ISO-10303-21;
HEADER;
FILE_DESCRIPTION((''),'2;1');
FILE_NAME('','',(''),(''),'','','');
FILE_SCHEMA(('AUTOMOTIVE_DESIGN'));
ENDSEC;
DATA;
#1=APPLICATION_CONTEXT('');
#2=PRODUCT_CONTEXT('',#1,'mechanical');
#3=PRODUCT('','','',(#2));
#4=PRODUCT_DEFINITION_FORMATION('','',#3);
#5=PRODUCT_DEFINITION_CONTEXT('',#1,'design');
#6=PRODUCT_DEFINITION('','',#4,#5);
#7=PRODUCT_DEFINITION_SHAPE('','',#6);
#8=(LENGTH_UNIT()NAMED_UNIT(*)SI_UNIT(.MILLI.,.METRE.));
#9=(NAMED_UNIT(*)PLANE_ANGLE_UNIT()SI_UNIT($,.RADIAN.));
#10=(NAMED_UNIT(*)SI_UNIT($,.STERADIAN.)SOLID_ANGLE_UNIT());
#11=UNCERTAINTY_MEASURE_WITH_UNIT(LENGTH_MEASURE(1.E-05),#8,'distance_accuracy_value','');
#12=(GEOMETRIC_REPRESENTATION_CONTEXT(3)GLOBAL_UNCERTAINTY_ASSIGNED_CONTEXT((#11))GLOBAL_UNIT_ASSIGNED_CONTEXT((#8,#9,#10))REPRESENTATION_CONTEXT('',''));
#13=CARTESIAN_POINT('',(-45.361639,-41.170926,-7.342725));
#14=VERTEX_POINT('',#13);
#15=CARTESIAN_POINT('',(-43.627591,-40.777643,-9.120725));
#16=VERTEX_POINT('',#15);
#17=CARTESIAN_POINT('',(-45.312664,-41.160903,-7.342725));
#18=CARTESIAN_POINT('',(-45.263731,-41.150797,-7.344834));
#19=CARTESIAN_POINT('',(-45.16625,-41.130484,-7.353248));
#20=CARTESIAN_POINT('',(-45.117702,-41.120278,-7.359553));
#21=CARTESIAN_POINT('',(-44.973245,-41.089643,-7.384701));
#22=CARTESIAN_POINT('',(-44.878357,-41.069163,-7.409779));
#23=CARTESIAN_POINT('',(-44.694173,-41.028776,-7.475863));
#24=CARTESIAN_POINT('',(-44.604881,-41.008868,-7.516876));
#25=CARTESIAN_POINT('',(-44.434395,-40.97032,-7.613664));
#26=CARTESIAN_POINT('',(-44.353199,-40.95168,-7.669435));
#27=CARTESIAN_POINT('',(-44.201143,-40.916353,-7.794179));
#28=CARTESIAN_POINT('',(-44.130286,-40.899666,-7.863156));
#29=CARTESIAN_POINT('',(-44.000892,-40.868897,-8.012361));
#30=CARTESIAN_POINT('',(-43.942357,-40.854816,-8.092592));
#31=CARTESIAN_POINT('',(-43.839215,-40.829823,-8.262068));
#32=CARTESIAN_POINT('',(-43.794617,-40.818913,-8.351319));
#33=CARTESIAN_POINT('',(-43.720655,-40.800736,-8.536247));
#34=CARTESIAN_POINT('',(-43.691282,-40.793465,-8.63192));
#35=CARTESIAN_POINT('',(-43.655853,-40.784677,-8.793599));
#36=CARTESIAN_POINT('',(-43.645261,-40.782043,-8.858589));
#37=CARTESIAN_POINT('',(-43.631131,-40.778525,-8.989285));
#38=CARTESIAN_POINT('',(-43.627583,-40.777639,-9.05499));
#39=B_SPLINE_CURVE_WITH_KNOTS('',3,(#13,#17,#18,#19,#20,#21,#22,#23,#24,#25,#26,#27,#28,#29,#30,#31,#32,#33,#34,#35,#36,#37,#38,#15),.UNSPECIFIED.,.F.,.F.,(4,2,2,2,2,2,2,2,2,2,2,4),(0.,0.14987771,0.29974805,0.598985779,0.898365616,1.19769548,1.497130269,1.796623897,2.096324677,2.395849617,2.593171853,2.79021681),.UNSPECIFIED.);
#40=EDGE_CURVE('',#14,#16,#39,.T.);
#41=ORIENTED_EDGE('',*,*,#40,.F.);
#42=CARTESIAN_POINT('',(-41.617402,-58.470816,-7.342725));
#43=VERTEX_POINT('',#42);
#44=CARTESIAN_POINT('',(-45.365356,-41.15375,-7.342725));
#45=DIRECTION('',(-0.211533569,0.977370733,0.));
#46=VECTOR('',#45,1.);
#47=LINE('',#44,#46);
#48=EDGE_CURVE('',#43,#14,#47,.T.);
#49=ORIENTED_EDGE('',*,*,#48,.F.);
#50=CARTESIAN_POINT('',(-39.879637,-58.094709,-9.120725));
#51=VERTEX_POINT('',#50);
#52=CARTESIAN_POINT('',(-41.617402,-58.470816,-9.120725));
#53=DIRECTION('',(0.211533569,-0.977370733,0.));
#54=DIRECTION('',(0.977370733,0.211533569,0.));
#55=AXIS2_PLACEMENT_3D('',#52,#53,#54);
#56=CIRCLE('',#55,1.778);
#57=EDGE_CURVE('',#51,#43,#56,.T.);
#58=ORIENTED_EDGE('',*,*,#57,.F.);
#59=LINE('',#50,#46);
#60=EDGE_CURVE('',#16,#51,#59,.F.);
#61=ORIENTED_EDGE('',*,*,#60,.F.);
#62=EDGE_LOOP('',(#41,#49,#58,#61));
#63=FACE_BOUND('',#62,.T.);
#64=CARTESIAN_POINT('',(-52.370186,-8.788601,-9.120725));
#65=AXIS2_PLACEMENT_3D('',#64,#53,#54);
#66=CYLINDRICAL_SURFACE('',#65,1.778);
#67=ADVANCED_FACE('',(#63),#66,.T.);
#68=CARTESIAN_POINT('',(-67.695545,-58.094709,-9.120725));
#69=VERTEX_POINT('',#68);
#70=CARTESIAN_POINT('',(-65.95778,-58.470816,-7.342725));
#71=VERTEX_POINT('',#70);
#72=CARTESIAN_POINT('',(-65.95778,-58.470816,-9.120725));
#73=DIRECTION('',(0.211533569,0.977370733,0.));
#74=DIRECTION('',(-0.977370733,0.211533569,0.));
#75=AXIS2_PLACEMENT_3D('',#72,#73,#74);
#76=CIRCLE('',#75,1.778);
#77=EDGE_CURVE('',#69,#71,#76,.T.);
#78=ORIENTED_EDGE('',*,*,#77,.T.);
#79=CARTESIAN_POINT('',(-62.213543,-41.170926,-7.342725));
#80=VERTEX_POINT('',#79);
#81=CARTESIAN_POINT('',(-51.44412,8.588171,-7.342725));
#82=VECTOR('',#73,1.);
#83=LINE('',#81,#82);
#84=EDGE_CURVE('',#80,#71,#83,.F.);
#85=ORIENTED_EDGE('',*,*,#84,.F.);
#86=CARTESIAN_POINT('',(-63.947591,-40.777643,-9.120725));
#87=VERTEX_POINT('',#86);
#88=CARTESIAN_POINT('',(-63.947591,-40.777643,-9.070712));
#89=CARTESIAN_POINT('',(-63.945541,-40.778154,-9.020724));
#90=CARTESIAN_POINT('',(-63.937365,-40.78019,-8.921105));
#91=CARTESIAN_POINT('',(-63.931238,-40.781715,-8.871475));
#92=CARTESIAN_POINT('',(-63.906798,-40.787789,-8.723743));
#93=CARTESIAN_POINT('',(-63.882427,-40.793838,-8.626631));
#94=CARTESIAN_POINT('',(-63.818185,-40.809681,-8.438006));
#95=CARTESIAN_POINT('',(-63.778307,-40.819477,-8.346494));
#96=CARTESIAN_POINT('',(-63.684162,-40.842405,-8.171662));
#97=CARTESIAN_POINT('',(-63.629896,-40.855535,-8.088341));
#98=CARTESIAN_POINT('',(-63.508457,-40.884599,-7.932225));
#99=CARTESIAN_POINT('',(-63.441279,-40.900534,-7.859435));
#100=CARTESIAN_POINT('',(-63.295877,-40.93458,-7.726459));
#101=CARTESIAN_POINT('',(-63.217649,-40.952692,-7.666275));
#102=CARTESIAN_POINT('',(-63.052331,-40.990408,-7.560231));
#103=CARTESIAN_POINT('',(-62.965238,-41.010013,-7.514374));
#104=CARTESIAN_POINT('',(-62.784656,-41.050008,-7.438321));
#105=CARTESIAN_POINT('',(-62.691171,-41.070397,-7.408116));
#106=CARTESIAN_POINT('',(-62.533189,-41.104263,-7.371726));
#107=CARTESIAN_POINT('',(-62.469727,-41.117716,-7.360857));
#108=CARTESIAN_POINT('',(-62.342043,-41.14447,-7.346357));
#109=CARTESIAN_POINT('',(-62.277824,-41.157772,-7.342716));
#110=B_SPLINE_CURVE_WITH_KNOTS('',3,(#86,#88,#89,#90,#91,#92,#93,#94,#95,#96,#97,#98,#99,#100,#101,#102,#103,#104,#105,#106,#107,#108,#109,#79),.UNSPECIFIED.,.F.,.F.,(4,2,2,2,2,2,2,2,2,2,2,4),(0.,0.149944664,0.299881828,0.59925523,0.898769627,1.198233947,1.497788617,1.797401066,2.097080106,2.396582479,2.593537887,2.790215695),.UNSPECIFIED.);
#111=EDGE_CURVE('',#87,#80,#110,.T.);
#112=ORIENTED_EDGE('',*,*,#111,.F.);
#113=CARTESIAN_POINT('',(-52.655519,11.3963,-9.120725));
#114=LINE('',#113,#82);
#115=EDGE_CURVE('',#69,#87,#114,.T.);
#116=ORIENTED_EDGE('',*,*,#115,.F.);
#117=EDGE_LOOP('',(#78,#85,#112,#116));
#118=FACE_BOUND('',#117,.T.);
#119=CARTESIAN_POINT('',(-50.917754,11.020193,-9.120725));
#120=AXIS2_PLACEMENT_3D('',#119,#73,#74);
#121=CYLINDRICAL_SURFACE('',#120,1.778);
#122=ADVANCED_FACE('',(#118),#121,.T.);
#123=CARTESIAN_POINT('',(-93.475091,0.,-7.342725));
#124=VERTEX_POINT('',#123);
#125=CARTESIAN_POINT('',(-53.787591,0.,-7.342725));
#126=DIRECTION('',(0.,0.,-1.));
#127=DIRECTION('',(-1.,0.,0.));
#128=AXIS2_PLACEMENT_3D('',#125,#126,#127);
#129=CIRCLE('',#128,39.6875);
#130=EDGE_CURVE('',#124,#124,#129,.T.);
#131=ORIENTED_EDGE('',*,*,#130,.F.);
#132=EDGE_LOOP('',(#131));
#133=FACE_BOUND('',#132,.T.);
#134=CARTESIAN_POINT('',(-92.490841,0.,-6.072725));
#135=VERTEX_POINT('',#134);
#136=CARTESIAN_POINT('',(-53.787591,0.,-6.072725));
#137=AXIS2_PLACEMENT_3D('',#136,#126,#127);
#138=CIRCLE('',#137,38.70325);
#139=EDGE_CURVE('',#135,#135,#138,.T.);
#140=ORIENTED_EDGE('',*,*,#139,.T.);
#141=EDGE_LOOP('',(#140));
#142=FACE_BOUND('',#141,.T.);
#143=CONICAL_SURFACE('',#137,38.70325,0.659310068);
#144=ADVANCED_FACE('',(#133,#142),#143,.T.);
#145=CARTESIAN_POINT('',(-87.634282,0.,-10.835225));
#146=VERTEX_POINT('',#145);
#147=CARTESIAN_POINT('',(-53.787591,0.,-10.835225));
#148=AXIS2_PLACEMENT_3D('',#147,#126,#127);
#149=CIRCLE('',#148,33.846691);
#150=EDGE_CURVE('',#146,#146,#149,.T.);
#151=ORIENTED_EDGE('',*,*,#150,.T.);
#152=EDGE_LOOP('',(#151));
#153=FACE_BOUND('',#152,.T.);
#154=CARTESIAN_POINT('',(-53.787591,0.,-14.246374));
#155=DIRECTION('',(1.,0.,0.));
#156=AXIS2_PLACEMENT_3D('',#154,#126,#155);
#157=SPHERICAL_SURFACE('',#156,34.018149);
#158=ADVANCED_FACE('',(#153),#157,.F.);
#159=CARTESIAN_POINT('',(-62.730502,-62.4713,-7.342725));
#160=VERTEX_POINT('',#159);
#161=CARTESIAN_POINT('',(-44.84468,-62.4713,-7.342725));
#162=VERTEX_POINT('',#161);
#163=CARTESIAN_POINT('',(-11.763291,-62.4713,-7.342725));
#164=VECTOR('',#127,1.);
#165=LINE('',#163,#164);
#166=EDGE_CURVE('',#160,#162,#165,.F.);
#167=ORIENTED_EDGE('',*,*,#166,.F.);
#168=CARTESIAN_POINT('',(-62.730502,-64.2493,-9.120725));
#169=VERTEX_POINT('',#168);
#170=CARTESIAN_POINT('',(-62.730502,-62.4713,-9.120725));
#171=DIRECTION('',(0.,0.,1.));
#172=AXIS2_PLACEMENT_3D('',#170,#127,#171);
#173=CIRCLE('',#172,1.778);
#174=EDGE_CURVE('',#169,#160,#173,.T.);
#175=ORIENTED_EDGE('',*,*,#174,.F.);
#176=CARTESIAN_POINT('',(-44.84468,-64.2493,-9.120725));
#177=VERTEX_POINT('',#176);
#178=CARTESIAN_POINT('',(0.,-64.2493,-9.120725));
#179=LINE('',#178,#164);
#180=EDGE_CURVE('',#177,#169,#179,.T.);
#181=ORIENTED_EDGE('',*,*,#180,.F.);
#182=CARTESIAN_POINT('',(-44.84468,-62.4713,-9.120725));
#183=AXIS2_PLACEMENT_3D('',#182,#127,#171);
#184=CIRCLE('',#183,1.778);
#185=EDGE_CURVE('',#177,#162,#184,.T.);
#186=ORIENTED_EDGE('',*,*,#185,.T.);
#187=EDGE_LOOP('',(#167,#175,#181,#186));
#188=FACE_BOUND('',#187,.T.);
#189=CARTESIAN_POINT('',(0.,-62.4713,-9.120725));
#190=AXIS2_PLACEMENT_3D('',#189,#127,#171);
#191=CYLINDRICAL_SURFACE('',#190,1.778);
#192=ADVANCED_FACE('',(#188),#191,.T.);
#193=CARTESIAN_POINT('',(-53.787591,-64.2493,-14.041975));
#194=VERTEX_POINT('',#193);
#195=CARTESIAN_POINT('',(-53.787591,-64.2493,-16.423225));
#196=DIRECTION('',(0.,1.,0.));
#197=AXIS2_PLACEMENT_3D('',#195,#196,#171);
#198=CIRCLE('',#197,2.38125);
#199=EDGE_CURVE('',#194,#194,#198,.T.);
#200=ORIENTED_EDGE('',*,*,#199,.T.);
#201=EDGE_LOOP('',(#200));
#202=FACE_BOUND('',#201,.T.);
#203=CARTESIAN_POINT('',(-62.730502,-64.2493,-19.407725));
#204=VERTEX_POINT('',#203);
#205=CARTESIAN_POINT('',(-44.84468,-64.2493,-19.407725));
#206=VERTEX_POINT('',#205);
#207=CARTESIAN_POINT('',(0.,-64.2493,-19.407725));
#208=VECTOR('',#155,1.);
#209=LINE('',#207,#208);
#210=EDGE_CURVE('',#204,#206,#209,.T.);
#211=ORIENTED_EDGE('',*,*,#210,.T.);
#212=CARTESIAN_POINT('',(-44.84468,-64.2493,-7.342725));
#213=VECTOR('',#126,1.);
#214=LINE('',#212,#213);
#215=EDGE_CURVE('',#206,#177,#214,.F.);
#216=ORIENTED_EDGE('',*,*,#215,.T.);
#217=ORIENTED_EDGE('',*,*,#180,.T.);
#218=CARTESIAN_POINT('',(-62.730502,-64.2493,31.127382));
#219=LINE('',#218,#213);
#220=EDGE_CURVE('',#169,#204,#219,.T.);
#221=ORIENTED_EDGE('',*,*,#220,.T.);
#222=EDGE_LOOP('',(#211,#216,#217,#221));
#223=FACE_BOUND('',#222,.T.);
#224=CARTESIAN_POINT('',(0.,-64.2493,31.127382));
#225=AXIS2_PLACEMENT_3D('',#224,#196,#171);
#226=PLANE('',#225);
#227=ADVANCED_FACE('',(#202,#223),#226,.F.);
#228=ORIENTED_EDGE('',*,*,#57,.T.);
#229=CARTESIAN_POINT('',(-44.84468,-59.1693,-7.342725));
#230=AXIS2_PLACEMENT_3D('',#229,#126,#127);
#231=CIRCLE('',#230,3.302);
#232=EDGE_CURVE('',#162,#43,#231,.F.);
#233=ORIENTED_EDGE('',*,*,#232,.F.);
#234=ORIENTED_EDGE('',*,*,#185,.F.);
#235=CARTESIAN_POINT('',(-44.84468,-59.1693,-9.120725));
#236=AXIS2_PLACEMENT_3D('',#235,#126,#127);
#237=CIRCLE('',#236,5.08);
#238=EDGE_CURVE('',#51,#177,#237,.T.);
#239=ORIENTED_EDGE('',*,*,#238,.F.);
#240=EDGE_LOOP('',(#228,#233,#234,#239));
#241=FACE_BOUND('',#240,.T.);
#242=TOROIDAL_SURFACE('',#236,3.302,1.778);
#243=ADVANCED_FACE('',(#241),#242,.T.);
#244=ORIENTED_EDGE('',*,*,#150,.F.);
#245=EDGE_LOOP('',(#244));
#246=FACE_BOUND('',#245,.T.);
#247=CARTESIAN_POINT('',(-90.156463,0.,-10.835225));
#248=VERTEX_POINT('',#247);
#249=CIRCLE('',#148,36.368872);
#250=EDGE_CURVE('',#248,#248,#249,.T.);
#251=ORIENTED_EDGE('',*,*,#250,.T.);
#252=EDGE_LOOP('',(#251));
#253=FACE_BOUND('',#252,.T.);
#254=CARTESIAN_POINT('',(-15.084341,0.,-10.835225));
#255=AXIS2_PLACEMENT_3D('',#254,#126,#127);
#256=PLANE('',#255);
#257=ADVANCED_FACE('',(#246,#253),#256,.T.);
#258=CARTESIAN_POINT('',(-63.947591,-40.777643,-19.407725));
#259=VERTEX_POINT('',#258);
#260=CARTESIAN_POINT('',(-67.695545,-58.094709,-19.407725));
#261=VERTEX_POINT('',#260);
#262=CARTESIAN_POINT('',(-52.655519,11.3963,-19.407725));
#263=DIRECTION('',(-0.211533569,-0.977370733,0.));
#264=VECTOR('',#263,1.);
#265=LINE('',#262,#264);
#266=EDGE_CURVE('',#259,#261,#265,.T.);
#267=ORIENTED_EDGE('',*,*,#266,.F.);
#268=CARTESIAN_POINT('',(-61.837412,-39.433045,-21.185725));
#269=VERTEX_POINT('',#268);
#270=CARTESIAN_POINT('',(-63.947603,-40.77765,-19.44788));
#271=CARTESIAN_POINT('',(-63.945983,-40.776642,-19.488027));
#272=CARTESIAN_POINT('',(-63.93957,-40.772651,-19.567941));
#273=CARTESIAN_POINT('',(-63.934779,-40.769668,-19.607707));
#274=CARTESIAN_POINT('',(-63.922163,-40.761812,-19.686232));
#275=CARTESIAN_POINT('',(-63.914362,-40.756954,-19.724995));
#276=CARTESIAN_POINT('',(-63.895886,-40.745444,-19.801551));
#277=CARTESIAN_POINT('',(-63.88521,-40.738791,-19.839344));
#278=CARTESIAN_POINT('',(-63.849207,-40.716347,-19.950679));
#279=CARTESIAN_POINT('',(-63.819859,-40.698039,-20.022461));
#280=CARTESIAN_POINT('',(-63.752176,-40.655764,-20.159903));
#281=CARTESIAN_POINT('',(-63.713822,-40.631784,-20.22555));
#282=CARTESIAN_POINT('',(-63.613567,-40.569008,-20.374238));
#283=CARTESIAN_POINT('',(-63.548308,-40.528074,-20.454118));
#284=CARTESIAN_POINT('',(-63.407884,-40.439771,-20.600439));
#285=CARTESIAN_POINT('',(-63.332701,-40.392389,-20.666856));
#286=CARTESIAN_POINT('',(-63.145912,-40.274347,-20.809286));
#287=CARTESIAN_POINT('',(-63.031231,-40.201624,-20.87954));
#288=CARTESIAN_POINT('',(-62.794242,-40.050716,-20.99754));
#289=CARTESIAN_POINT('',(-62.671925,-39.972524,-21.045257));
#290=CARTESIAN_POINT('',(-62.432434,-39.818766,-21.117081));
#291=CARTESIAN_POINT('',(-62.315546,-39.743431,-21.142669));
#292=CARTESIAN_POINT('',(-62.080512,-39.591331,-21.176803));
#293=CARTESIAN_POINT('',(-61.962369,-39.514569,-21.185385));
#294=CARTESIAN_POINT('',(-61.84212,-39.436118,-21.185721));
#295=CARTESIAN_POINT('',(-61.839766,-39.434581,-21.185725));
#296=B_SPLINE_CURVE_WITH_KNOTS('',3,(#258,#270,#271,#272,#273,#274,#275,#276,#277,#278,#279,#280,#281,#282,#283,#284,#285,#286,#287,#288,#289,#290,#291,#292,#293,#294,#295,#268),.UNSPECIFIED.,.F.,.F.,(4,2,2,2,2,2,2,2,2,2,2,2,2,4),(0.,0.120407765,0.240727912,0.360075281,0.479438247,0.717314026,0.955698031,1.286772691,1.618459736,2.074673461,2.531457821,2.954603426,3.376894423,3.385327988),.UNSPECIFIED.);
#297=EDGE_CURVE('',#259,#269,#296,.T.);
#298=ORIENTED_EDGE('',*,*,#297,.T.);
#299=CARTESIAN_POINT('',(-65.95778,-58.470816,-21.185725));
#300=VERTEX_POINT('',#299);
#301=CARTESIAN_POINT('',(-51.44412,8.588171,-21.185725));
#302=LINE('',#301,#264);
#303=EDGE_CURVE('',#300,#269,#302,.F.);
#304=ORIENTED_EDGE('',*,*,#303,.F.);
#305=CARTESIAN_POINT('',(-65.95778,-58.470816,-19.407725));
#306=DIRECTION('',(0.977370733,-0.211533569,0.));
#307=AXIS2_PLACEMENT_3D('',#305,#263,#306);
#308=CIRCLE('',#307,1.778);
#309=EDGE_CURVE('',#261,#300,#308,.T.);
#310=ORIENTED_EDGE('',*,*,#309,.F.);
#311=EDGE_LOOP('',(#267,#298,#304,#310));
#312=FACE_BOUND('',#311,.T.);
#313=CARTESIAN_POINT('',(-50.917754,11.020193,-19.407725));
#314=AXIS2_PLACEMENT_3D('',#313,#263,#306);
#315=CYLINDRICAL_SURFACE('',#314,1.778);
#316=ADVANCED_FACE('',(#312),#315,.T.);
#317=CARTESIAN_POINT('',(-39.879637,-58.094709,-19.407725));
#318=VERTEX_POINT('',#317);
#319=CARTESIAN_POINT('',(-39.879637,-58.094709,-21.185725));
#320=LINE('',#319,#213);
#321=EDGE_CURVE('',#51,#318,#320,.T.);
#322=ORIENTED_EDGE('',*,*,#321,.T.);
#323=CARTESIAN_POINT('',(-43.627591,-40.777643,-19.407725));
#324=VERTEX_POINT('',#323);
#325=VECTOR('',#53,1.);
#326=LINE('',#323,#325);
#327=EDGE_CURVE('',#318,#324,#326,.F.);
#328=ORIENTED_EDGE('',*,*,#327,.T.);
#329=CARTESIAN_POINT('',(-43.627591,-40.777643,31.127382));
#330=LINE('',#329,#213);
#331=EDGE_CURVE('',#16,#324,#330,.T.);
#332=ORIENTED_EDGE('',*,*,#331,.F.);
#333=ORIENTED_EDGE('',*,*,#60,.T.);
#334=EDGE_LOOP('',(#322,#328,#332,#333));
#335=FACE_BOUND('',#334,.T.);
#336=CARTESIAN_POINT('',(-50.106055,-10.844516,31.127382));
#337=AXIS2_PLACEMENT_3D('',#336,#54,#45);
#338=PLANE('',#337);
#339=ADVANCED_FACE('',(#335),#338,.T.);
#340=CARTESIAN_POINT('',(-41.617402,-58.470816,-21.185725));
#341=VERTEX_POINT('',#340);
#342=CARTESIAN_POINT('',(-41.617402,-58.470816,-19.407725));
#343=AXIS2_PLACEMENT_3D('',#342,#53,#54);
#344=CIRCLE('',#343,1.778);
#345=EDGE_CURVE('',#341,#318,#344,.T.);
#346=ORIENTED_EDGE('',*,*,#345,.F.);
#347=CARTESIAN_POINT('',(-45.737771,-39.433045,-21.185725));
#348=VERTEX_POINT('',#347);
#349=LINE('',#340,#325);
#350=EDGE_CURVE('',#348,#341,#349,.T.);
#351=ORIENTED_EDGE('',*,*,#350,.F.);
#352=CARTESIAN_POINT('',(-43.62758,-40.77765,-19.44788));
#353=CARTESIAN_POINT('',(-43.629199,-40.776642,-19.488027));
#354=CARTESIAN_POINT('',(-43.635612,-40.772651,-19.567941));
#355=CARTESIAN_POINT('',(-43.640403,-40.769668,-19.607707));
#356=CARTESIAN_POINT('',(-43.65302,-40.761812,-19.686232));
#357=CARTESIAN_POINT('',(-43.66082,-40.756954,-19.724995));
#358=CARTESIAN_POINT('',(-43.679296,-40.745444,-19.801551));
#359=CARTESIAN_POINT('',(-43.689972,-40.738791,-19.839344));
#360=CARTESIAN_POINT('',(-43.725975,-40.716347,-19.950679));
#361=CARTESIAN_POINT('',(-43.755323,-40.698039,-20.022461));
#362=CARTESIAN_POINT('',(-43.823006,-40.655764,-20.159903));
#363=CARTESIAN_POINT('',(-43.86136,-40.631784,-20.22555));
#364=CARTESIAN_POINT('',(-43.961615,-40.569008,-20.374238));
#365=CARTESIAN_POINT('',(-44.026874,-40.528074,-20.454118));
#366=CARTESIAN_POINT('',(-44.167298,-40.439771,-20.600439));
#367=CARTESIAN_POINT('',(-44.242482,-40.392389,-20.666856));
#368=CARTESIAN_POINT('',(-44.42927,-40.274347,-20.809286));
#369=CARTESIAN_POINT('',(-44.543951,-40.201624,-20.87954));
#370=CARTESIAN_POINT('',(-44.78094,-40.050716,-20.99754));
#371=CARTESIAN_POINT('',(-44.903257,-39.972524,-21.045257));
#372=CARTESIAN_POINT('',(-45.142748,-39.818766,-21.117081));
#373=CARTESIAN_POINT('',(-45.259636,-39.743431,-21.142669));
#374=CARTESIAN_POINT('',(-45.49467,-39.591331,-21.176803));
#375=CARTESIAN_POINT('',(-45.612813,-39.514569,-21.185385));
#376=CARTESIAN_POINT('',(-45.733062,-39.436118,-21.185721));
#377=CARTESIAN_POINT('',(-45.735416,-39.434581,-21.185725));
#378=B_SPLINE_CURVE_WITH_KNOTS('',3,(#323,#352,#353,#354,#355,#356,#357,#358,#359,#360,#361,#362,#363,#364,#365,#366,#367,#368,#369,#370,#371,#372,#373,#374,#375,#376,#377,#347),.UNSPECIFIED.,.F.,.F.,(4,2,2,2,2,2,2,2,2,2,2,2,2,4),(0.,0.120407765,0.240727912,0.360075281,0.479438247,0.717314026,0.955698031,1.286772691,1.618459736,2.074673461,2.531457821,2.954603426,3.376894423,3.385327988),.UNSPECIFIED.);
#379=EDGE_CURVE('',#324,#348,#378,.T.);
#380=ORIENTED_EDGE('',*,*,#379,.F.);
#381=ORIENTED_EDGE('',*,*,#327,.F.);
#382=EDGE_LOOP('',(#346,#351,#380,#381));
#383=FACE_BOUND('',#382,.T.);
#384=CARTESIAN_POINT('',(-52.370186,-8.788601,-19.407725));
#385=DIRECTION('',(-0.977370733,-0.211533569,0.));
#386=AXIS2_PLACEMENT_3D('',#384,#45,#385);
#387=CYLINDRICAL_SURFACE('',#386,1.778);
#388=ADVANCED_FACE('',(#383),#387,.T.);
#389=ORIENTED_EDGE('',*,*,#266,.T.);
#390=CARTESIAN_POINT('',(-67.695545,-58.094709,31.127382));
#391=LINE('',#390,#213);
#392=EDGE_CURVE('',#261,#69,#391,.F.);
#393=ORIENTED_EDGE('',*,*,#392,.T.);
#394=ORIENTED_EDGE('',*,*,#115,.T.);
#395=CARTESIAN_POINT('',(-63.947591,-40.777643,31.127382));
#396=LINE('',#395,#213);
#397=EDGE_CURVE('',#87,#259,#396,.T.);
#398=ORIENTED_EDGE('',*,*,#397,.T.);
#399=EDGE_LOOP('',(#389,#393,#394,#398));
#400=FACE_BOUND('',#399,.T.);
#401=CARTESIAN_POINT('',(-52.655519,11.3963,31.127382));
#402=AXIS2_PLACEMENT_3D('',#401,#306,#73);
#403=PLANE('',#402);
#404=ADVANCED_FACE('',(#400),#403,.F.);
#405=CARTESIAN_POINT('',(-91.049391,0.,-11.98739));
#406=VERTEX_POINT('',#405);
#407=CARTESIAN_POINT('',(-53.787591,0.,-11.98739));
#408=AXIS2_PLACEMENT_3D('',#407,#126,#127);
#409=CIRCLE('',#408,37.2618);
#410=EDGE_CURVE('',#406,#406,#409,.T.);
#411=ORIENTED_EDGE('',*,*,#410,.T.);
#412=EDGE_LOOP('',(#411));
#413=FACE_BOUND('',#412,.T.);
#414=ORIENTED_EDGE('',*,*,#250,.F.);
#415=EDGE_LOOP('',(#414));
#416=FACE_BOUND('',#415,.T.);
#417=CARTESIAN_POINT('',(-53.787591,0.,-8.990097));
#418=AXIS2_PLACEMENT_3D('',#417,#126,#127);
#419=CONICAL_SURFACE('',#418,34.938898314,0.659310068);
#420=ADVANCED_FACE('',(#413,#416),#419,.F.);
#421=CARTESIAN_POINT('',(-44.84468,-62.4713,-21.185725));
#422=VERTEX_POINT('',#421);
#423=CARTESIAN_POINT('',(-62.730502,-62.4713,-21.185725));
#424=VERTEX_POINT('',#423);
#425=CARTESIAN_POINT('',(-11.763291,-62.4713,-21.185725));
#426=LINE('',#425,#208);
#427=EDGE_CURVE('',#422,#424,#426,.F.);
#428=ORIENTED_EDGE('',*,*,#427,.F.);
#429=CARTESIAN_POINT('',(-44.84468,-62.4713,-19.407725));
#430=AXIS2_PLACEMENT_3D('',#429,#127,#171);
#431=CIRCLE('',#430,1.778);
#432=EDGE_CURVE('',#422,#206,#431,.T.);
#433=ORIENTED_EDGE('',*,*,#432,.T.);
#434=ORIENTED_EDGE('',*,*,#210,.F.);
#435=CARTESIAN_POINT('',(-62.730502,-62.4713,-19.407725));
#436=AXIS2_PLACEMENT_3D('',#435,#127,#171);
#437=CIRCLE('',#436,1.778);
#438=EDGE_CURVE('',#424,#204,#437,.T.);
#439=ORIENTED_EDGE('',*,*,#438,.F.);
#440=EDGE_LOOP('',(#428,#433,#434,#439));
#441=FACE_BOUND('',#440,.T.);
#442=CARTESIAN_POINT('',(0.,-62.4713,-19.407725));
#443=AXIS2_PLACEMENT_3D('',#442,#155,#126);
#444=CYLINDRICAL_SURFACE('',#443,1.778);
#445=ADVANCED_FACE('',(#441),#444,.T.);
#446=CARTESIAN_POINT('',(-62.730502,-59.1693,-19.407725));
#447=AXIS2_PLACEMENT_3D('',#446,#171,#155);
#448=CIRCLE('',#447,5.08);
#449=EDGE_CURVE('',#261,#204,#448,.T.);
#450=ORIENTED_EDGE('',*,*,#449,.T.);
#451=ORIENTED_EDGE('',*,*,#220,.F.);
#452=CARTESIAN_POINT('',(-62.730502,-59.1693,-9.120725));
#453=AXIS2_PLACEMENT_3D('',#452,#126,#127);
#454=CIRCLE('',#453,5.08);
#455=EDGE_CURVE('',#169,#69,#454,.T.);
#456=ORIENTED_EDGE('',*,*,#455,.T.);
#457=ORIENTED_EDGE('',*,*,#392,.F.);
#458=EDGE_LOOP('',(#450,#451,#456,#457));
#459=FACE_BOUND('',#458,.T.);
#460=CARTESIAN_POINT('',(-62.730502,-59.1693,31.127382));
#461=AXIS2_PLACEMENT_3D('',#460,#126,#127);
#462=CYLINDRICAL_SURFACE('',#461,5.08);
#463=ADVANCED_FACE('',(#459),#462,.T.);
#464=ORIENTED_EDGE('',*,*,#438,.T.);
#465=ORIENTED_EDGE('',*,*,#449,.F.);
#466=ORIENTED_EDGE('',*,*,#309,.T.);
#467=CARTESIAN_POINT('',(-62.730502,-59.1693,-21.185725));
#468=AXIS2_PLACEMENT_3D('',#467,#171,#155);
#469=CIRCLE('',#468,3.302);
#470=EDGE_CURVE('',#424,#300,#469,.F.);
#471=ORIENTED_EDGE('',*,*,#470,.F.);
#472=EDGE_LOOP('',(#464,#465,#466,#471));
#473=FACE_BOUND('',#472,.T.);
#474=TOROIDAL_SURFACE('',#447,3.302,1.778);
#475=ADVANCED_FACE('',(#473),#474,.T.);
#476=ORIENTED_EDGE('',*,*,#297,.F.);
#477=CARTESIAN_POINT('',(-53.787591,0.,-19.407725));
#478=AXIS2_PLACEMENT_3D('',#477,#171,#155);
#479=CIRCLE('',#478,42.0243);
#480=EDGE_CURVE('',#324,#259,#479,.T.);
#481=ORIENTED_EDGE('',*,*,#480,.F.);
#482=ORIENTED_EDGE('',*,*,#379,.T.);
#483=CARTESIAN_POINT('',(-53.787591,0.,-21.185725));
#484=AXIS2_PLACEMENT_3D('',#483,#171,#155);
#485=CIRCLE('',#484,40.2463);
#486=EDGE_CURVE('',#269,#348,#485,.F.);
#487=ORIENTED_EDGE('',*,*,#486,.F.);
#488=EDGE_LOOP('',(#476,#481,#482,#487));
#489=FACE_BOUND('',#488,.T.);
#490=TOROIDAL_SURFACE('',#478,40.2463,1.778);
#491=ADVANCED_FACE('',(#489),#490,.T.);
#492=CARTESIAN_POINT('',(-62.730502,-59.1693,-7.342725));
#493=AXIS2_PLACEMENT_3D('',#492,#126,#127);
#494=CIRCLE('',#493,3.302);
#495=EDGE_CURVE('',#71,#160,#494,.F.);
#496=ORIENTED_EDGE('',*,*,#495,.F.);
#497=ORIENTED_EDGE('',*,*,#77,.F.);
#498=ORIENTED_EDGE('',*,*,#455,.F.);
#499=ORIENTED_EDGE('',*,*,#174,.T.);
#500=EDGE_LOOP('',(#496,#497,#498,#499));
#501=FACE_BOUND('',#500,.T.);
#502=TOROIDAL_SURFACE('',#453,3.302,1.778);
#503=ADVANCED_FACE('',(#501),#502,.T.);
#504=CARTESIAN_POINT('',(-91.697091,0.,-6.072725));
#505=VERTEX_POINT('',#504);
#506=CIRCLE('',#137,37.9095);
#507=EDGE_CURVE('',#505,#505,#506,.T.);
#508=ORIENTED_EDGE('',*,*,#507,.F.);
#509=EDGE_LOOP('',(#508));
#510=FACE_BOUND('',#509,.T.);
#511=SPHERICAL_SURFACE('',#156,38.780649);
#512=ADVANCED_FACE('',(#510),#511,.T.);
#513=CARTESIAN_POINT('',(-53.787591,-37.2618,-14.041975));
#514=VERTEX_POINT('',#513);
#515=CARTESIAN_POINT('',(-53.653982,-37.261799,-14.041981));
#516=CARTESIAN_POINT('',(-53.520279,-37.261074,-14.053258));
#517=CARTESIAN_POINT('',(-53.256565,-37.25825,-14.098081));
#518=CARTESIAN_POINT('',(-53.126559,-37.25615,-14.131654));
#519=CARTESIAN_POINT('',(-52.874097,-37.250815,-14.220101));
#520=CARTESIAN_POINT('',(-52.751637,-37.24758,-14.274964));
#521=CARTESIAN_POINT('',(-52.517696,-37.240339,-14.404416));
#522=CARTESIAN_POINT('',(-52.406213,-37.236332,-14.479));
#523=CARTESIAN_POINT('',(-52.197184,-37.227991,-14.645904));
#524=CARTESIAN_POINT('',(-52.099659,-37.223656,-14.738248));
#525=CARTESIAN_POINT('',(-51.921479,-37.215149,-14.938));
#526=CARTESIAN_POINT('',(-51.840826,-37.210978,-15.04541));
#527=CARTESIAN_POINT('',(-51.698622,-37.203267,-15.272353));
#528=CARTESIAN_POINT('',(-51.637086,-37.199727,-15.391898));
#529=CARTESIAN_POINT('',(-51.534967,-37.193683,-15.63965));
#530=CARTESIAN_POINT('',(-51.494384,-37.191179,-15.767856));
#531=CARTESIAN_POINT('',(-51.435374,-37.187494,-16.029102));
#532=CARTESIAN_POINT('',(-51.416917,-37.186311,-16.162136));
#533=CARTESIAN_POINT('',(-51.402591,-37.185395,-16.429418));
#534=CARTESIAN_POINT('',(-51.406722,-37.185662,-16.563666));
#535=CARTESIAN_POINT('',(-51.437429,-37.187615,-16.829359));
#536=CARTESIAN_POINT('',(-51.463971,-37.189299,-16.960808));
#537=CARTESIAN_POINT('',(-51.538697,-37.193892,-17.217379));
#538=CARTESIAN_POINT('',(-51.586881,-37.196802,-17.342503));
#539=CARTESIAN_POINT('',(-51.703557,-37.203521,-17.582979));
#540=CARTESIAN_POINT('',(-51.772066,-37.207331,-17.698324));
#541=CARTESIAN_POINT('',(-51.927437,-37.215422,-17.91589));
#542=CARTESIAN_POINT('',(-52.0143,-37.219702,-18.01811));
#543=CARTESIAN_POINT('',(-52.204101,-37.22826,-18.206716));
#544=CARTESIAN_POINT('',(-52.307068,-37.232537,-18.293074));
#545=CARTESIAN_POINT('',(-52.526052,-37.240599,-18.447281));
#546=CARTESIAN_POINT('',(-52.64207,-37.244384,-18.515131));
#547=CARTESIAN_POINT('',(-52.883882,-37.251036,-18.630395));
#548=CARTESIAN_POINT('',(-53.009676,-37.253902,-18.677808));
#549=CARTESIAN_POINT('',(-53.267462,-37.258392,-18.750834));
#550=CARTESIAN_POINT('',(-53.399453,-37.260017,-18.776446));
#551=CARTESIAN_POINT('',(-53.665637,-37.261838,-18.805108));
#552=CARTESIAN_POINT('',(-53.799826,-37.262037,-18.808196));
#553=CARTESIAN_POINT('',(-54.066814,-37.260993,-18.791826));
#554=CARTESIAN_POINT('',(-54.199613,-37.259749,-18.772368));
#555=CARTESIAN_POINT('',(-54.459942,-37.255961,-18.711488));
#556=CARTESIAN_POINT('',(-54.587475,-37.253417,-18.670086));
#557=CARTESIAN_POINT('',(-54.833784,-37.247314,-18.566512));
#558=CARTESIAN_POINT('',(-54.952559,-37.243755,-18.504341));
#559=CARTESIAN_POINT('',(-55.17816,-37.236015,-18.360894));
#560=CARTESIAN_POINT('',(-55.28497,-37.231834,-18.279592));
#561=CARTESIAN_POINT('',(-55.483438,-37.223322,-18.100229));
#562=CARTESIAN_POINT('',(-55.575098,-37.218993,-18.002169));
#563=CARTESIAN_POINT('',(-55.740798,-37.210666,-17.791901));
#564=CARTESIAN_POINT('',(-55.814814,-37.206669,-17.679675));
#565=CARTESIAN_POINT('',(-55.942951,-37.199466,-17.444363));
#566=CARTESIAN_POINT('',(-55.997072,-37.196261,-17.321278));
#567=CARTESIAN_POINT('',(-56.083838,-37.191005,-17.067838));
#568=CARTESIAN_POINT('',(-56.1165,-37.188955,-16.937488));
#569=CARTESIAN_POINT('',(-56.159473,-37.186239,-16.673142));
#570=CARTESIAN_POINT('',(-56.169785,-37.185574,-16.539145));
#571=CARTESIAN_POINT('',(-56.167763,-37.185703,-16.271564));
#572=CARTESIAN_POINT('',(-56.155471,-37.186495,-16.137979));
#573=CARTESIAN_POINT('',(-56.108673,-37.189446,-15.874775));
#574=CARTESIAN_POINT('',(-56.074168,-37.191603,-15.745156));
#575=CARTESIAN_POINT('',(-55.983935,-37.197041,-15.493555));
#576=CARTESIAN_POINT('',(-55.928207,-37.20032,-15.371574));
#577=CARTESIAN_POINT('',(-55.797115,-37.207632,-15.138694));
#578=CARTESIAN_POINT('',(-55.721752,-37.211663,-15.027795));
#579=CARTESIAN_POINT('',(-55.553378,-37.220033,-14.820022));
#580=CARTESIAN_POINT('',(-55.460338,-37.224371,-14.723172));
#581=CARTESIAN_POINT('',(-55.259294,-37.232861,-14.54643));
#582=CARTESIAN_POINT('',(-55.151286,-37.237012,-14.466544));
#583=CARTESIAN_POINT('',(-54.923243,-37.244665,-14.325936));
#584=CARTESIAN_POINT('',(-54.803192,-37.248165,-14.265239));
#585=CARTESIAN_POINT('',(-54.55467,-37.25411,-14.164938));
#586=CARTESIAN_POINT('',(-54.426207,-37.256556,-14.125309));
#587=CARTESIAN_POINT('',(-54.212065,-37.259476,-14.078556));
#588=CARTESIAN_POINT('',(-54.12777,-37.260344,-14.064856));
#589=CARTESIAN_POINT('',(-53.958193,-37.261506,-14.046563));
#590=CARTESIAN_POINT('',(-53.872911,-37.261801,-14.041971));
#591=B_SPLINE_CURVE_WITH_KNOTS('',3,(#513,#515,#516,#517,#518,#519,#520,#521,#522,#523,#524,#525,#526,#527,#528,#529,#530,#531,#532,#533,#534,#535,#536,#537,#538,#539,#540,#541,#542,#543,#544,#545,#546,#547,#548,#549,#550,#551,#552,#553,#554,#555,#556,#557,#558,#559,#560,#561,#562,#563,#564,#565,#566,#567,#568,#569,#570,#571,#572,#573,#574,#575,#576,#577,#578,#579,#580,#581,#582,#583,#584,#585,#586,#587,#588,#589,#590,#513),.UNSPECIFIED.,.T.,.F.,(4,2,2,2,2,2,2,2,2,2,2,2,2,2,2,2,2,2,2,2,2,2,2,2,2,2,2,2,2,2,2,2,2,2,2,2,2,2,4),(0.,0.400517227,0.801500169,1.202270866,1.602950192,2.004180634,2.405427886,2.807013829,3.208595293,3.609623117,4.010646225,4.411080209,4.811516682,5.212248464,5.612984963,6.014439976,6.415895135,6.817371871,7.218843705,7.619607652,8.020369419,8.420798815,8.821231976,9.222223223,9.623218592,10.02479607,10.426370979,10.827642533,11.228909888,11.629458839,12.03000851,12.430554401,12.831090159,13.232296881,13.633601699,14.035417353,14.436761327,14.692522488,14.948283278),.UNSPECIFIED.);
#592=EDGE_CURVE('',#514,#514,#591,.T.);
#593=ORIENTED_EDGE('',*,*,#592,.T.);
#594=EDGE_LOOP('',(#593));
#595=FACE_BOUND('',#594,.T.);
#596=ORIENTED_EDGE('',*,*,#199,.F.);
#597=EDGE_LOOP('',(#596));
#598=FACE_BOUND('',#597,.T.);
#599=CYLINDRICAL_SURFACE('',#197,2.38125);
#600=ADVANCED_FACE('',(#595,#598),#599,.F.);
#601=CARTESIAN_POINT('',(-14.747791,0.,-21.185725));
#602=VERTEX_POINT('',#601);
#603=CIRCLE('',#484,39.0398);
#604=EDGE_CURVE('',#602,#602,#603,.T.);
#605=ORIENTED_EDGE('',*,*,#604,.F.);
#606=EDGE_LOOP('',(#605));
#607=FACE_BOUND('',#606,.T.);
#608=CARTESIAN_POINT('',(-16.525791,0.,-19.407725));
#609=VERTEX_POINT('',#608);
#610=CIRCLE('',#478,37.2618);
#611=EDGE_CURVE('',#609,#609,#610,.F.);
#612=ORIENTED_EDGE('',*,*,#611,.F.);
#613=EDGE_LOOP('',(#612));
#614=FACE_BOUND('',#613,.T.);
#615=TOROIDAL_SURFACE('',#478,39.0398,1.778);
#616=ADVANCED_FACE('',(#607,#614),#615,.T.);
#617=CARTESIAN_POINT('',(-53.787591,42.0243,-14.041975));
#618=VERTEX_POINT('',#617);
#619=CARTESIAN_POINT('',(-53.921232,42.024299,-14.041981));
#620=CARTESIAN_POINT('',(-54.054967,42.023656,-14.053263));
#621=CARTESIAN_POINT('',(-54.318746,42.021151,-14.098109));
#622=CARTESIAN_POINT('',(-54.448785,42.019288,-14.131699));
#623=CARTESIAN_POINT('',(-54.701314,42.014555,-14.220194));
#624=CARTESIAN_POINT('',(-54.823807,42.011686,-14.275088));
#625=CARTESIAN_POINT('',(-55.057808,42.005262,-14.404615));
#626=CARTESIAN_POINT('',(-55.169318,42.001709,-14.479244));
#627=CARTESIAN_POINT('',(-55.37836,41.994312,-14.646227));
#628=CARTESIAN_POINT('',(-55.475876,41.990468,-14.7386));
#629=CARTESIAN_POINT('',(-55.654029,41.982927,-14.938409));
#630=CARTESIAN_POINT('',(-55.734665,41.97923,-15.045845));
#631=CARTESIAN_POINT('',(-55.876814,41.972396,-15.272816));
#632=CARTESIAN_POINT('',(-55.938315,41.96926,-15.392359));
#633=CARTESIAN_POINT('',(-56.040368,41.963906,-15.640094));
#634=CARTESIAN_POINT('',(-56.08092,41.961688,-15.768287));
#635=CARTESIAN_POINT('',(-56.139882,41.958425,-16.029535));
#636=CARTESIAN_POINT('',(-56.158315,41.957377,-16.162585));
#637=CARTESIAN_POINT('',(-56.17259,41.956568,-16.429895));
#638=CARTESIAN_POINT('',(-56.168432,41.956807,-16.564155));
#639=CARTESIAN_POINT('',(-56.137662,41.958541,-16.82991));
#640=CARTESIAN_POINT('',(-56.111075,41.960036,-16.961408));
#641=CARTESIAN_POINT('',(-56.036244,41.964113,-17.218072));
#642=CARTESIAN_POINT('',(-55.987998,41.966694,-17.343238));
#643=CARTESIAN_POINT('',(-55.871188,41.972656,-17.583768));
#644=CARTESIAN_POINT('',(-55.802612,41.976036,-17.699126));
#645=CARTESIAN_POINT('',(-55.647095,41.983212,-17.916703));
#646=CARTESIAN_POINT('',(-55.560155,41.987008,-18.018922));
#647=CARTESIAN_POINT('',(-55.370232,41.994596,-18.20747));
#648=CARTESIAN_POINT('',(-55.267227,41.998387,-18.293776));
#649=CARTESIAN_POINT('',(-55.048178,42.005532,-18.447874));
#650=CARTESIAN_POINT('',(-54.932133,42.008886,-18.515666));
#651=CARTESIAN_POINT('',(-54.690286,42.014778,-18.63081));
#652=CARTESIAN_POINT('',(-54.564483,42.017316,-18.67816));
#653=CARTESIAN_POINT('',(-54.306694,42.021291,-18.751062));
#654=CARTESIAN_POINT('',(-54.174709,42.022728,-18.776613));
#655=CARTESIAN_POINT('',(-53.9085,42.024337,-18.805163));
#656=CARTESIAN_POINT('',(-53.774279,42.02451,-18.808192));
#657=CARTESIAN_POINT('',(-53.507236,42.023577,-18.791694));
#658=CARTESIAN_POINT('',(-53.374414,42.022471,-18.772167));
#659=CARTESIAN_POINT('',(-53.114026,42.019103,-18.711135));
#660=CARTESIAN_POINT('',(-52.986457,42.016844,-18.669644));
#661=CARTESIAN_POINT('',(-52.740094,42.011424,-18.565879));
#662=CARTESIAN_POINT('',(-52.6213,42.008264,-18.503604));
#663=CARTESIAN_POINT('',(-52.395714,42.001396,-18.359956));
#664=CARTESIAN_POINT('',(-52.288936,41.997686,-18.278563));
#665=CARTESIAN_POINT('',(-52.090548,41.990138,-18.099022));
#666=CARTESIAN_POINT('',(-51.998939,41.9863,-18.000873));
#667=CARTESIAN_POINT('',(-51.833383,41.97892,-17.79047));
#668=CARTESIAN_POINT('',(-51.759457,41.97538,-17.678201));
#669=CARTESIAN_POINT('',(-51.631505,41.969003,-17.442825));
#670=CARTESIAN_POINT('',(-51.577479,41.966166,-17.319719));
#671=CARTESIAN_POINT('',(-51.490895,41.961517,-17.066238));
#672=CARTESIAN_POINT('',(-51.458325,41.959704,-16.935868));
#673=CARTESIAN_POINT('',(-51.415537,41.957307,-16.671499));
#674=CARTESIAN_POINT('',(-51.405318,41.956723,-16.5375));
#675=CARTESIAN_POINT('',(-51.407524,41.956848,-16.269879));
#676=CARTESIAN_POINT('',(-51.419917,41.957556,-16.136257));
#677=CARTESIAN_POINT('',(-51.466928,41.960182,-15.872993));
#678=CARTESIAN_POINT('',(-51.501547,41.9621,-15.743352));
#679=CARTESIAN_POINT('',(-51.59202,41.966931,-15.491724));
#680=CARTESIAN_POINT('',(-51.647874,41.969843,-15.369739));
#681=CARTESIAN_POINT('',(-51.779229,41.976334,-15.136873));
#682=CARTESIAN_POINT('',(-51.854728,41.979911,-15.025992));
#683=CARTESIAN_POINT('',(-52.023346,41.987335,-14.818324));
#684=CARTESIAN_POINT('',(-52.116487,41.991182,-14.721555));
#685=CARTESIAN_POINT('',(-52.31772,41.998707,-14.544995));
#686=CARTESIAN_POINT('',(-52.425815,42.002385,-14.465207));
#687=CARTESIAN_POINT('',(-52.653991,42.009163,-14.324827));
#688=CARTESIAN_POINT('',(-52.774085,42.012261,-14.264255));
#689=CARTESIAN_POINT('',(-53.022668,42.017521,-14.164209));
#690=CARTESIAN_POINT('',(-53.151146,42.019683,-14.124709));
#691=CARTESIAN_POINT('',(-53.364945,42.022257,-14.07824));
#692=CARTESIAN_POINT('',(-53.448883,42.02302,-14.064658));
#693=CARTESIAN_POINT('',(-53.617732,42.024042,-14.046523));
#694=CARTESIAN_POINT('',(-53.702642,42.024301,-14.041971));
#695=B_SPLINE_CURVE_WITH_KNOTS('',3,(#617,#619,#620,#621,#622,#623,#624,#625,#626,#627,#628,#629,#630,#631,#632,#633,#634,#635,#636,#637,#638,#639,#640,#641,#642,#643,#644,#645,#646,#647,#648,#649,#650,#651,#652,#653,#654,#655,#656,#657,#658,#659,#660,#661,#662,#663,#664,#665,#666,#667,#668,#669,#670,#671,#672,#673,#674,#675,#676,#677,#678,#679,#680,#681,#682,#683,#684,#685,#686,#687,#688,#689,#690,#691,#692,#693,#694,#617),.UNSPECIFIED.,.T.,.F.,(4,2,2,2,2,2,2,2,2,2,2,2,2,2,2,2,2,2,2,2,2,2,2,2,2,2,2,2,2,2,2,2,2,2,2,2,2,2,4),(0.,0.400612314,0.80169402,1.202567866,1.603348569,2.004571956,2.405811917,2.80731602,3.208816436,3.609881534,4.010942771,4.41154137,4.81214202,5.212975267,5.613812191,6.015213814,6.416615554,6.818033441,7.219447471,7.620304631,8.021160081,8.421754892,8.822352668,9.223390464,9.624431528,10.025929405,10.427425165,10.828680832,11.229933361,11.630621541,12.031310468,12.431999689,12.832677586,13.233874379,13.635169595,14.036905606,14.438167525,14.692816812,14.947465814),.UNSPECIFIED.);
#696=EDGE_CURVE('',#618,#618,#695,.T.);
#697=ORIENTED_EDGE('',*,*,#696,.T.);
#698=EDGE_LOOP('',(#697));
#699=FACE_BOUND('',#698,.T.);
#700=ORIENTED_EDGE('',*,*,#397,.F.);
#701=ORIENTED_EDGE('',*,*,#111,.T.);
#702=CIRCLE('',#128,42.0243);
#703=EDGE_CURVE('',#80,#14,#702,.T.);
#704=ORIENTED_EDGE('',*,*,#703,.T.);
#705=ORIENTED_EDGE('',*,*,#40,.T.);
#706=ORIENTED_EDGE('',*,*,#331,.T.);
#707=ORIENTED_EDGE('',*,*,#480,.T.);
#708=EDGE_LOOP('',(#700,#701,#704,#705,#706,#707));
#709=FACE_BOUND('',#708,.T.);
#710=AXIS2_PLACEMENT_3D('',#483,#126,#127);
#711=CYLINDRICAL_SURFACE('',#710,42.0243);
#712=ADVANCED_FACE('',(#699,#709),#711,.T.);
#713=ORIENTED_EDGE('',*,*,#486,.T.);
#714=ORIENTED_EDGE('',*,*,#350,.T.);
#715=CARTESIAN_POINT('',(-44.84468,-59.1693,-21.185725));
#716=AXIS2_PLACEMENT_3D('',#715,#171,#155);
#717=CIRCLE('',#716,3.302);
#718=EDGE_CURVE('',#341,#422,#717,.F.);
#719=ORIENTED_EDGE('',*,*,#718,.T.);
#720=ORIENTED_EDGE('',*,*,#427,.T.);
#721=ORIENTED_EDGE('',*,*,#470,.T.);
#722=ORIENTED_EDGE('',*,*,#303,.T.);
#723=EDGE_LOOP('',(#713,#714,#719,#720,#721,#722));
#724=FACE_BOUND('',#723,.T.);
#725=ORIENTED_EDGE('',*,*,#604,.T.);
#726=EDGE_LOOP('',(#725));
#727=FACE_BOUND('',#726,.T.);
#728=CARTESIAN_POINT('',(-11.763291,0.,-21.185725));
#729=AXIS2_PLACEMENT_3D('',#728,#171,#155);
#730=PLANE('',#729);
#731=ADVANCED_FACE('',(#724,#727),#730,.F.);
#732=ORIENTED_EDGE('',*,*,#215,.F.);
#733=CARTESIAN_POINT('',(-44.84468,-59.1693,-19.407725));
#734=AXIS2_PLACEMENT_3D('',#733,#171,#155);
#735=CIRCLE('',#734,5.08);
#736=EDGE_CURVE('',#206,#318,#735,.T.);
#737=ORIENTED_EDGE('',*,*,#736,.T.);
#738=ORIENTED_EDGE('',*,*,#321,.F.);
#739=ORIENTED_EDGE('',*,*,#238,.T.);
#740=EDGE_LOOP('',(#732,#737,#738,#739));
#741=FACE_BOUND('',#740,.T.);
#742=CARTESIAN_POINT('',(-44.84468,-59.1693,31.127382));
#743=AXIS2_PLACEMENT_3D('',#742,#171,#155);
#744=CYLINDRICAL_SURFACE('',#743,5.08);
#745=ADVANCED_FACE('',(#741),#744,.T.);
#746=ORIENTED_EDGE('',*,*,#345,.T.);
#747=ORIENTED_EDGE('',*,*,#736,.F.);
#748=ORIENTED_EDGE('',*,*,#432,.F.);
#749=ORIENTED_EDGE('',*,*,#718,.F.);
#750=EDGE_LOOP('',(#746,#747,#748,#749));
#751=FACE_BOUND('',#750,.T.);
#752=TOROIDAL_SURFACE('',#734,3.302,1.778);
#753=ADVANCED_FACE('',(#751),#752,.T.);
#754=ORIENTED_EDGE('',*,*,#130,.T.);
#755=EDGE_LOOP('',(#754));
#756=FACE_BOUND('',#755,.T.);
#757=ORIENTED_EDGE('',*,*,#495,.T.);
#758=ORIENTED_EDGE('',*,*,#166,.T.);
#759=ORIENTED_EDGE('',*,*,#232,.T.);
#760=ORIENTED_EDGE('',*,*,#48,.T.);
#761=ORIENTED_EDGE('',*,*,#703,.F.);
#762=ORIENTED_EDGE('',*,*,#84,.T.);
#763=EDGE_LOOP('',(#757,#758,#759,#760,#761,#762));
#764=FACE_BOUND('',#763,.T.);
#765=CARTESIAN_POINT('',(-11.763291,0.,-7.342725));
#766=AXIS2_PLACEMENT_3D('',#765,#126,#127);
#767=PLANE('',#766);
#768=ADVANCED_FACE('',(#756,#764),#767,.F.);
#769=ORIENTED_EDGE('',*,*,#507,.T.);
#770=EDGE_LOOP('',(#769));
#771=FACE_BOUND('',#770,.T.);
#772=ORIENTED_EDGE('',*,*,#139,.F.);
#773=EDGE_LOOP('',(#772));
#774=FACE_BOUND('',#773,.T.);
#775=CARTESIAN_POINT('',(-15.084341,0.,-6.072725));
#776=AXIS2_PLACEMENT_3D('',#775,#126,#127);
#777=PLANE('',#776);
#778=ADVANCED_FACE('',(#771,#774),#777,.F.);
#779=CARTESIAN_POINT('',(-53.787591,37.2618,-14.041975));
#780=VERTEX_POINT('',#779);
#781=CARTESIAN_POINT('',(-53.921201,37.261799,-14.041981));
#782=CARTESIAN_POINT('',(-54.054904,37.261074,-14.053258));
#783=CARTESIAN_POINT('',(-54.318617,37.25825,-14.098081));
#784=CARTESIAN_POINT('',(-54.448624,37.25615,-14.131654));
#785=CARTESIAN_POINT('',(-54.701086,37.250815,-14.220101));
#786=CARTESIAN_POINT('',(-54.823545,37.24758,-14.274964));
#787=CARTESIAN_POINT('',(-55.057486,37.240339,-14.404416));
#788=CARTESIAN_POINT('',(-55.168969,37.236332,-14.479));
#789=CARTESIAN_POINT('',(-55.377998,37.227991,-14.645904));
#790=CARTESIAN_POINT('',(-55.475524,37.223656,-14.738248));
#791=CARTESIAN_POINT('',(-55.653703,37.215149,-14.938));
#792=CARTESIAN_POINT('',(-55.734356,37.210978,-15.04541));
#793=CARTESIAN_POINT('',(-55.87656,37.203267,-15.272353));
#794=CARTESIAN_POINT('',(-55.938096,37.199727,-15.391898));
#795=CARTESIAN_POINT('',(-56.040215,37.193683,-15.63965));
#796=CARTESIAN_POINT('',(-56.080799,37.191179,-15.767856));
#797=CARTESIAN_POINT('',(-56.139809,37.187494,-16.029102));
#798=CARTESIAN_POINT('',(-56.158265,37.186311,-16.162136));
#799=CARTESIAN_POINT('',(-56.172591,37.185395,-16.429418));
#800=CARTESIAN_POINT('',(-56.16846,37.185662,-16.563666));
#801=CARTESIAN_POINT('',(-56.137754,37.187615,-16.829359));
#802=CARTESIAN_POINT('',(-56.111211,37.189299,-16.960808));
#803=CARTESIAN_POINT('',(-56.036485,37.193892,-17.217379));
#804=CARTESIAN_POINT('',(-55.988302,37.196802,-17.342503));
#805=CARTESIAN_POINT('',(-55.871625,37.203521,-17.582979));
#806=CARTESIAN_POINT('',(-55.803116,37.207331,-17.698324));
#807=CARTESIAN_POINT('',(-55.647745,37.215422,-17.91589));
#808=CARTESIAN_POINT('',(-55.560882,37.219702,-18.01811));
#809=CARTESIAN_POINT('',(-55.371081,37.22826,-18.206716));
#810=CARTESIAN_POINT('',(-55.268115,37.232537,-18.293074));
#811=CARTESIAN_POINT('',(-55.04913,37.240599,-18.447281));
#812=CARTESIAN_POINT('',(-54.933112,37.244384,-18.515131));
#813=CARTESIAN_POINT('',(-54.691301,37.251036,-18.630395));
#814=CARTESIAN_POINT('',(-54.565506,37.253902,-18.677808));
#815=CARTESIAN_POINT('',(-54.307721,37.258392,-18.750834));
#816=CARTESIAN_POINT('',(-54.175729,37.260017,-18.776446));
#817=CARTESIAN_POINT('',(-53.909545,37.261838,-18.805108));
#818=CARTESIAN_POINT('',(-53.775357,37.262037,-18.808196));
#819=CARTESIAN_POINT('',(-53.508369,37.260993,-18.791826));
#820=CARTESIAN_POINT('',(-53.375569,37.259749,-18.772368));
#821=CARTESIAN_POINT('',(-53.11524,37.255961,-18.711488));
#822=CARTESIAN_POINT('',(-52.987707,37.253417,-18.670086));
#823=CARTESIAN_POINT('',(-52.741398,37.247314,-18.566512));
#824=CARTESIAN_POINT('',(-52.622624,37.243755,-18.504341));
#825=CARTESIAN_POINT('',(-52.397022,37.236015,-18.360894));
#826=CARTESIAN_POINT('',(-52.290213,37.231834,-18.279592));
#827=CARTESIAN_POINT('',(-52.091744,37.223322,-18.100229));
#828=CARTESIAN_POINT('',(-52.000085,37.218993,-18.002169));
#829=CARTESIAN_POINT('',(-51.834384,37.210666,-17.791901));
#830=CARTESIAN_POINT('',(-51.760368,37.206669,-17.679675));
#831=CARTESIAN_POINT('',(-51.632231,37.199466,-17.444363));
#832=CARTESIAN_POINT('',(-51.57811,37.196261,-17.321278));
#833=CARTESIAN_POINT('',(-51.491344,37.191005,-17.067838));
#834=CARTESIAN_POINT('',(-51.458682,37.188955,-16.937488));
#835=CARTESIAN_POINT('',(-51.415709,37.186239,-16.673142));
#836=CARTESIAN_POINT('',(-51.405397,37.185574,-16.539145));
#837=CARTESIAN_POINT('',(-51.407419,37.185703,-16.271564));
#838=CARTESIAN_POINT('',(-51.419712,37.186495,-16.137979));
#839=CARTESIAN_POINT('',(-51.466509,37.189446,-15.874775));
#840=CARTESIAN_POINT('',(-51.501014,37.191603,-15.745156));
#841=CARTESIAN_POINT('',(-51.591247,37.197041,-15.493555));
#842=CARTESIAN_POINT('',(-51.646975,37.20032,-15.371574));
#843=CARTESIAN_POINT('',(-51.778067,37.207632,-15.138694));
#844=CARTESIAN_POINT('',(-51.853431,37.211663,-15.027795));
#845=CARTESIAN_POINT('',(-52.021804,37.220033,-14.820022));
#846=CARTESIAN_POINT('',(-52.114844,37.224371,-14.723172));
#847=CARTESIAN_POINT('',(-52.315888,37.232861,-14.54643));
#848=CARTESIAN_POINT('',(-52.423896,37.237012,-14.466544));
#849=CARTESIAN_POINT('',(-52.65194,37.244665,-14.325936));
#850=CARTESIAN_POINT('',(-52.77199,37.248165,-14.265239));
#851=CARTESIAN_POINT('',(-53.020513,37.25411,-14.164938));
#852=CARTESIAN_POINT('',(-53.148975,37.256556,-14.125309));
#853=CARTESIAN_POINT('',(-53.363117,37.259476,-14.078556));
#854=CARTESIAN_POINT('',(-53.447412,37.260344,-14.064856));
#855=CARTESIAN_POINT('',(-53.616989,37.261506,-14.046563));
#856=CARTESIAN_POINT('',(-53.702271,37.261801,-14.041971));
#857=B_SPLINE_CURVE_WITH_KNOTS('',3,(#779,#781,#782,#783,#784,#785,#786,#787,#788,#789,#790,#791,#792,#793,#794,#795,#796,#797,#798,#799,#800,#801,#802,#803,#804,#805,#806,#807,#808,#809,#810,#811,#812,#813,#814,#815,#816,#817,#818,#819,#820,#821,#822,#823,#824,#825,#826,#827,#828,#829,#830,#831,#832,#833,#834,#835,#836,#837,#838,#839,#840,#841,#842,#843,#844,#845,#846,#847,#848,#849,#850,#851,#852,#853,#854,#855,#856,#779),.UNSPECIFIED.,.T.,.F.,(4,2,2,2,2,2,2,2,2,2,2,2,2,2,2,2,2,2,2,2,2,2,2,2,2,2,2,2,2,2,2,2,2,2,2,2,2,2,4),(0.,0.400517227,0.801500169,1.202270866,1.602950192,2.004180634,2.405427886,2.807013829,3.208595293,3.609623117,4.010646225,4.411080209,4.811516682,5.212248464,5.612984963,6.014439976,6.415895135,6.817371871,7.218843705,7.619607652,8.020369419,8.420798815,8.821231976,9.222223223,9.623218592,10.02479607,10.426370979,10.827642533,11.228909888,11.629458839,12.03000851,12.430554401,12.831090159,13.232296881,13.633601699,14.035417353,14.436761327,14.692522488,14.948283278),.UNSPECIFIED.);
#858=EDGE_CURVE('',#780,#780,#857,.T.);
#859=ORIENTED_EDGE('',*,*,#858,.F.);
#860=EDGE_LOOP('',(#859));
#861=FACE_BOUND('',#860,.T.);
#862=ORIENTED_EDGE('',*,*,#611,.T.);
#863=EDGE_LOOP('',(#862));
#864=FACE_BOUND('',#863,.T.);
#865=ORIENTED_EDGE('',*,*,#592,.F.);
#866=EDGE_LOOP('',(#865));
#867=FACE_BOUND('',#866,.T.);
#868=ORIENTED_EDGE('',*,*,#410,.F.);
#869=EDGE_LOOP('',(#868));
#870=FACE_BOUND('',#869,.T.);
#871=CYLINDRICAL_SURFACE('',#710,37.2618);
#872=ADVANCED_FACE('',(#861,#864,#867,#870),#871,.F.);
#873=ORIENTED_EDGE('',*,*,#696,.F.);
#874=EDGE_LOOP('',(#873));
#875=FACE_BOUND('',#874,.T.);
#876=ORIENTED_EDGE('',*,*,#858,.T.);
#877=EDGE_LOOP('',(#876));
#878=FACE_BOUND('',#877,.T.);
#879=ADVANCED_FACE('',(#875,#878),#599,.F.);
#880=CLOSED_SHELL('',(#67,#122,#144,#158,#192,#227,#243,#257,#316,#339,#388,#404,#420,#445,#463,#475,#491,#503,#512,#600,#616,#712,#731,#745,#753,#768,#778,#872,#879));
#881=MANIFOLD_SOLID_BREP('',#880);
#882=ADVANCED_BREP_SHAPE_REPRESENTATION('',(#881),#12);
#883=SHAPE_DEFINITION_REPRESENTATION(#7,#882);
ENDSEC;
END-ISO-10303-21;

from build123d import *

# Parameters (mm, degrees)
BOSS_EXTRUDE1_START     = -13.843
BOSS_EXTRUDE1_DEPTH     = 13.843
CUT_EXTRUDE1_DEPTH      = 118.939907135
CUT_EXTRUDE1_DEPTH_BACK = 118.939907135
SKETCH2_R               = 2.38125
FILLET1_R               = 5.08
FILLET2_R               = 1.778


# Read off the part's stored shape, not the designer's step: Shell1
with BuildPart() as part:
    # Sketch1 → Revolve1 (revolve)
    with BuildSketch(Plane(origin=(0, 0, 0), x_dir=(1, 0, 0), z_dir=(0, 1, 0)), mode=Mode.PRIVATE) as revolve1_sk:
        with BuildLine():
            Line((-11.76329111, 21.185724662), (-11.76329111, 7.342724662))
            Line((-11.76329111, 7.342724662), (-14.10009111, 7.342724662))
            Line((-14.10009111, 7.342724662), (-15.08434111, 6.072724662))
            Line((-15.08434111, 6.072724662), (-15.87809111, 6.072724662))
            ThreePointArc((-15.87809111, 6.072724662), (-29.426153143, -15.927440725), (-53.78759111, -24.534275338))
            Line((-53.78759111, -24.534275338), (-53.78759111, 21.185724662))
            Line((-53.78759111, 21.185724662), (-11.76329111, 21.185724662))
        make_face()
    revolve(revolve1_sk.sketch.rotate(Axis((-53.78759111, 0, -21.185724662), (0, 0, 1)), 180), axis=Axis((-53.78759111, 0, -21.185724662), (0, 0, 1)))

    # Shell1 outline → Shell1 (revolve, cut)
    with BuildSketch(Plane(origin=(-53.78759111, 0, 0), x_dir=(1, 0, 0), z_dir=(0, -1, 0))):
        with BuildLine():
            Line((36.368872083, -10.835224662), (33.846691352, -10.835224695))
            ThreePointArc((33.846691352, -10.835224695), (22.816589176, 10.985307164), (0, 19.771775338))
            Line((0, 19.771775338), (0, -21.185724662))
            Line((0, -21.185724662), (37.2618, -21.185724662))
            Line((37.2618, -21.185724662), (37.2618, -11.987389716))
            Line((37.2618, -11.987389716), (36.368872083, -10.835224662))
        make_face()
    revolve(axis=Axis((-53.78759111, 0, 0), (0, 0, 1)), mode=Mode.SUBTRACT)

    # Sketch5 → Boss-Extrude1 (add)
    with BuildSketch(Plane(origin=(0, 0, -21.185724662), x_dir=(-1, 0, 0), z_dir=(0, 0, -1)).offset(BOSS_EXTRUDE1_START)):
        with BuildLine():
            Line((53.78759111, -64.2493), (53.78759111, -42.0243))
            ThreePointArc((53.78759111, -42.0243), (48.669492024, -41.711471471), (43.62759111, -40.777643268))
            Line((43.62759111, -40.777643268), (38.54759111, -64.2493))
            Line((38.54759111, -64.2493), (53.78759111, -64.2493))
        make_face()
        with BuildLine():
            ThreePointArc((63.94759111, -40.777643268), (58.905690196, -41.711471471), (53.78759111, -42.0243))
            Line((53.78759111, -42.0243), (53.78759111, -64.2493))
            Line((53.78759111, -64.2493), (69.02759111, -64.2493))
            Line((69.02759111, -64.2493), (63.94759111, -40.777643268))
        make_face()
    extrude(amount=BOSS_EXTRUDE1_DEPTH)

    # Sketch2 → Cut-Extrude1 (cut, two sides: drawn at the far end of the back side and taken through both)
    with BuildSketch(Plane(origin=(0, 0, 0), x_dir=(1, 0, 0), z_dir=(0, 1, 0)).offset(-CUT_EXTRUDE1_DEPTH_BACK)):
        with Locations(Location((-53.78759111, 16.423224662, 0), (0, 0, 270))):
            Circle(SKETCH2_R)
    extrude(amount=CUT_EXTRUDE1_DEPTH + CUT_EXTRUDE1_DEPTH_BACK, mode=Mode.SUBTRACT)

    # Fillet1
    fillet1_edges = [part.edges().sort_by_distance(p)[0] for p in [
        (-69.02759111, -64.2493, -14.264224662),
        (-38.54759111, -64.2493, -14.264224662),
    ]]
    fillet(fillet1_edges, radius=FILLET1_R)

    # Fillet2
    fillet2_edges = [part.edges().sort_by_distance(p)[0] for p in [
        (-91.04939111, 0, -21.185724662),
        (-53.78759111, 42.0243, -21.185724662),
        (-65.82156825, -49.436176368, -21.185724662),
        (-41.75361397, -49.436176368, -21.185724662),
        (-41.75361397, -49.436176368, -7.342724662),
        (-53.78759111, -64.2493, -21.185724662),
        (-66.684317939, -62.358930081, -21.185724662),
        (-40.89086428, -62.358930081, -21.185724662),
        (-53.78759111, -64.2493, -7.342724662),
        (-65.82156825, -49.436176368, -7.342724662),
        (-66.684317939, -62.358930081, -7.342724662),
        (-40.89086428, -62.358930081, -7.342724662),
    ]]
    fillet(fillet2_edges, radius=FILLET2_R)


solid = part.part
